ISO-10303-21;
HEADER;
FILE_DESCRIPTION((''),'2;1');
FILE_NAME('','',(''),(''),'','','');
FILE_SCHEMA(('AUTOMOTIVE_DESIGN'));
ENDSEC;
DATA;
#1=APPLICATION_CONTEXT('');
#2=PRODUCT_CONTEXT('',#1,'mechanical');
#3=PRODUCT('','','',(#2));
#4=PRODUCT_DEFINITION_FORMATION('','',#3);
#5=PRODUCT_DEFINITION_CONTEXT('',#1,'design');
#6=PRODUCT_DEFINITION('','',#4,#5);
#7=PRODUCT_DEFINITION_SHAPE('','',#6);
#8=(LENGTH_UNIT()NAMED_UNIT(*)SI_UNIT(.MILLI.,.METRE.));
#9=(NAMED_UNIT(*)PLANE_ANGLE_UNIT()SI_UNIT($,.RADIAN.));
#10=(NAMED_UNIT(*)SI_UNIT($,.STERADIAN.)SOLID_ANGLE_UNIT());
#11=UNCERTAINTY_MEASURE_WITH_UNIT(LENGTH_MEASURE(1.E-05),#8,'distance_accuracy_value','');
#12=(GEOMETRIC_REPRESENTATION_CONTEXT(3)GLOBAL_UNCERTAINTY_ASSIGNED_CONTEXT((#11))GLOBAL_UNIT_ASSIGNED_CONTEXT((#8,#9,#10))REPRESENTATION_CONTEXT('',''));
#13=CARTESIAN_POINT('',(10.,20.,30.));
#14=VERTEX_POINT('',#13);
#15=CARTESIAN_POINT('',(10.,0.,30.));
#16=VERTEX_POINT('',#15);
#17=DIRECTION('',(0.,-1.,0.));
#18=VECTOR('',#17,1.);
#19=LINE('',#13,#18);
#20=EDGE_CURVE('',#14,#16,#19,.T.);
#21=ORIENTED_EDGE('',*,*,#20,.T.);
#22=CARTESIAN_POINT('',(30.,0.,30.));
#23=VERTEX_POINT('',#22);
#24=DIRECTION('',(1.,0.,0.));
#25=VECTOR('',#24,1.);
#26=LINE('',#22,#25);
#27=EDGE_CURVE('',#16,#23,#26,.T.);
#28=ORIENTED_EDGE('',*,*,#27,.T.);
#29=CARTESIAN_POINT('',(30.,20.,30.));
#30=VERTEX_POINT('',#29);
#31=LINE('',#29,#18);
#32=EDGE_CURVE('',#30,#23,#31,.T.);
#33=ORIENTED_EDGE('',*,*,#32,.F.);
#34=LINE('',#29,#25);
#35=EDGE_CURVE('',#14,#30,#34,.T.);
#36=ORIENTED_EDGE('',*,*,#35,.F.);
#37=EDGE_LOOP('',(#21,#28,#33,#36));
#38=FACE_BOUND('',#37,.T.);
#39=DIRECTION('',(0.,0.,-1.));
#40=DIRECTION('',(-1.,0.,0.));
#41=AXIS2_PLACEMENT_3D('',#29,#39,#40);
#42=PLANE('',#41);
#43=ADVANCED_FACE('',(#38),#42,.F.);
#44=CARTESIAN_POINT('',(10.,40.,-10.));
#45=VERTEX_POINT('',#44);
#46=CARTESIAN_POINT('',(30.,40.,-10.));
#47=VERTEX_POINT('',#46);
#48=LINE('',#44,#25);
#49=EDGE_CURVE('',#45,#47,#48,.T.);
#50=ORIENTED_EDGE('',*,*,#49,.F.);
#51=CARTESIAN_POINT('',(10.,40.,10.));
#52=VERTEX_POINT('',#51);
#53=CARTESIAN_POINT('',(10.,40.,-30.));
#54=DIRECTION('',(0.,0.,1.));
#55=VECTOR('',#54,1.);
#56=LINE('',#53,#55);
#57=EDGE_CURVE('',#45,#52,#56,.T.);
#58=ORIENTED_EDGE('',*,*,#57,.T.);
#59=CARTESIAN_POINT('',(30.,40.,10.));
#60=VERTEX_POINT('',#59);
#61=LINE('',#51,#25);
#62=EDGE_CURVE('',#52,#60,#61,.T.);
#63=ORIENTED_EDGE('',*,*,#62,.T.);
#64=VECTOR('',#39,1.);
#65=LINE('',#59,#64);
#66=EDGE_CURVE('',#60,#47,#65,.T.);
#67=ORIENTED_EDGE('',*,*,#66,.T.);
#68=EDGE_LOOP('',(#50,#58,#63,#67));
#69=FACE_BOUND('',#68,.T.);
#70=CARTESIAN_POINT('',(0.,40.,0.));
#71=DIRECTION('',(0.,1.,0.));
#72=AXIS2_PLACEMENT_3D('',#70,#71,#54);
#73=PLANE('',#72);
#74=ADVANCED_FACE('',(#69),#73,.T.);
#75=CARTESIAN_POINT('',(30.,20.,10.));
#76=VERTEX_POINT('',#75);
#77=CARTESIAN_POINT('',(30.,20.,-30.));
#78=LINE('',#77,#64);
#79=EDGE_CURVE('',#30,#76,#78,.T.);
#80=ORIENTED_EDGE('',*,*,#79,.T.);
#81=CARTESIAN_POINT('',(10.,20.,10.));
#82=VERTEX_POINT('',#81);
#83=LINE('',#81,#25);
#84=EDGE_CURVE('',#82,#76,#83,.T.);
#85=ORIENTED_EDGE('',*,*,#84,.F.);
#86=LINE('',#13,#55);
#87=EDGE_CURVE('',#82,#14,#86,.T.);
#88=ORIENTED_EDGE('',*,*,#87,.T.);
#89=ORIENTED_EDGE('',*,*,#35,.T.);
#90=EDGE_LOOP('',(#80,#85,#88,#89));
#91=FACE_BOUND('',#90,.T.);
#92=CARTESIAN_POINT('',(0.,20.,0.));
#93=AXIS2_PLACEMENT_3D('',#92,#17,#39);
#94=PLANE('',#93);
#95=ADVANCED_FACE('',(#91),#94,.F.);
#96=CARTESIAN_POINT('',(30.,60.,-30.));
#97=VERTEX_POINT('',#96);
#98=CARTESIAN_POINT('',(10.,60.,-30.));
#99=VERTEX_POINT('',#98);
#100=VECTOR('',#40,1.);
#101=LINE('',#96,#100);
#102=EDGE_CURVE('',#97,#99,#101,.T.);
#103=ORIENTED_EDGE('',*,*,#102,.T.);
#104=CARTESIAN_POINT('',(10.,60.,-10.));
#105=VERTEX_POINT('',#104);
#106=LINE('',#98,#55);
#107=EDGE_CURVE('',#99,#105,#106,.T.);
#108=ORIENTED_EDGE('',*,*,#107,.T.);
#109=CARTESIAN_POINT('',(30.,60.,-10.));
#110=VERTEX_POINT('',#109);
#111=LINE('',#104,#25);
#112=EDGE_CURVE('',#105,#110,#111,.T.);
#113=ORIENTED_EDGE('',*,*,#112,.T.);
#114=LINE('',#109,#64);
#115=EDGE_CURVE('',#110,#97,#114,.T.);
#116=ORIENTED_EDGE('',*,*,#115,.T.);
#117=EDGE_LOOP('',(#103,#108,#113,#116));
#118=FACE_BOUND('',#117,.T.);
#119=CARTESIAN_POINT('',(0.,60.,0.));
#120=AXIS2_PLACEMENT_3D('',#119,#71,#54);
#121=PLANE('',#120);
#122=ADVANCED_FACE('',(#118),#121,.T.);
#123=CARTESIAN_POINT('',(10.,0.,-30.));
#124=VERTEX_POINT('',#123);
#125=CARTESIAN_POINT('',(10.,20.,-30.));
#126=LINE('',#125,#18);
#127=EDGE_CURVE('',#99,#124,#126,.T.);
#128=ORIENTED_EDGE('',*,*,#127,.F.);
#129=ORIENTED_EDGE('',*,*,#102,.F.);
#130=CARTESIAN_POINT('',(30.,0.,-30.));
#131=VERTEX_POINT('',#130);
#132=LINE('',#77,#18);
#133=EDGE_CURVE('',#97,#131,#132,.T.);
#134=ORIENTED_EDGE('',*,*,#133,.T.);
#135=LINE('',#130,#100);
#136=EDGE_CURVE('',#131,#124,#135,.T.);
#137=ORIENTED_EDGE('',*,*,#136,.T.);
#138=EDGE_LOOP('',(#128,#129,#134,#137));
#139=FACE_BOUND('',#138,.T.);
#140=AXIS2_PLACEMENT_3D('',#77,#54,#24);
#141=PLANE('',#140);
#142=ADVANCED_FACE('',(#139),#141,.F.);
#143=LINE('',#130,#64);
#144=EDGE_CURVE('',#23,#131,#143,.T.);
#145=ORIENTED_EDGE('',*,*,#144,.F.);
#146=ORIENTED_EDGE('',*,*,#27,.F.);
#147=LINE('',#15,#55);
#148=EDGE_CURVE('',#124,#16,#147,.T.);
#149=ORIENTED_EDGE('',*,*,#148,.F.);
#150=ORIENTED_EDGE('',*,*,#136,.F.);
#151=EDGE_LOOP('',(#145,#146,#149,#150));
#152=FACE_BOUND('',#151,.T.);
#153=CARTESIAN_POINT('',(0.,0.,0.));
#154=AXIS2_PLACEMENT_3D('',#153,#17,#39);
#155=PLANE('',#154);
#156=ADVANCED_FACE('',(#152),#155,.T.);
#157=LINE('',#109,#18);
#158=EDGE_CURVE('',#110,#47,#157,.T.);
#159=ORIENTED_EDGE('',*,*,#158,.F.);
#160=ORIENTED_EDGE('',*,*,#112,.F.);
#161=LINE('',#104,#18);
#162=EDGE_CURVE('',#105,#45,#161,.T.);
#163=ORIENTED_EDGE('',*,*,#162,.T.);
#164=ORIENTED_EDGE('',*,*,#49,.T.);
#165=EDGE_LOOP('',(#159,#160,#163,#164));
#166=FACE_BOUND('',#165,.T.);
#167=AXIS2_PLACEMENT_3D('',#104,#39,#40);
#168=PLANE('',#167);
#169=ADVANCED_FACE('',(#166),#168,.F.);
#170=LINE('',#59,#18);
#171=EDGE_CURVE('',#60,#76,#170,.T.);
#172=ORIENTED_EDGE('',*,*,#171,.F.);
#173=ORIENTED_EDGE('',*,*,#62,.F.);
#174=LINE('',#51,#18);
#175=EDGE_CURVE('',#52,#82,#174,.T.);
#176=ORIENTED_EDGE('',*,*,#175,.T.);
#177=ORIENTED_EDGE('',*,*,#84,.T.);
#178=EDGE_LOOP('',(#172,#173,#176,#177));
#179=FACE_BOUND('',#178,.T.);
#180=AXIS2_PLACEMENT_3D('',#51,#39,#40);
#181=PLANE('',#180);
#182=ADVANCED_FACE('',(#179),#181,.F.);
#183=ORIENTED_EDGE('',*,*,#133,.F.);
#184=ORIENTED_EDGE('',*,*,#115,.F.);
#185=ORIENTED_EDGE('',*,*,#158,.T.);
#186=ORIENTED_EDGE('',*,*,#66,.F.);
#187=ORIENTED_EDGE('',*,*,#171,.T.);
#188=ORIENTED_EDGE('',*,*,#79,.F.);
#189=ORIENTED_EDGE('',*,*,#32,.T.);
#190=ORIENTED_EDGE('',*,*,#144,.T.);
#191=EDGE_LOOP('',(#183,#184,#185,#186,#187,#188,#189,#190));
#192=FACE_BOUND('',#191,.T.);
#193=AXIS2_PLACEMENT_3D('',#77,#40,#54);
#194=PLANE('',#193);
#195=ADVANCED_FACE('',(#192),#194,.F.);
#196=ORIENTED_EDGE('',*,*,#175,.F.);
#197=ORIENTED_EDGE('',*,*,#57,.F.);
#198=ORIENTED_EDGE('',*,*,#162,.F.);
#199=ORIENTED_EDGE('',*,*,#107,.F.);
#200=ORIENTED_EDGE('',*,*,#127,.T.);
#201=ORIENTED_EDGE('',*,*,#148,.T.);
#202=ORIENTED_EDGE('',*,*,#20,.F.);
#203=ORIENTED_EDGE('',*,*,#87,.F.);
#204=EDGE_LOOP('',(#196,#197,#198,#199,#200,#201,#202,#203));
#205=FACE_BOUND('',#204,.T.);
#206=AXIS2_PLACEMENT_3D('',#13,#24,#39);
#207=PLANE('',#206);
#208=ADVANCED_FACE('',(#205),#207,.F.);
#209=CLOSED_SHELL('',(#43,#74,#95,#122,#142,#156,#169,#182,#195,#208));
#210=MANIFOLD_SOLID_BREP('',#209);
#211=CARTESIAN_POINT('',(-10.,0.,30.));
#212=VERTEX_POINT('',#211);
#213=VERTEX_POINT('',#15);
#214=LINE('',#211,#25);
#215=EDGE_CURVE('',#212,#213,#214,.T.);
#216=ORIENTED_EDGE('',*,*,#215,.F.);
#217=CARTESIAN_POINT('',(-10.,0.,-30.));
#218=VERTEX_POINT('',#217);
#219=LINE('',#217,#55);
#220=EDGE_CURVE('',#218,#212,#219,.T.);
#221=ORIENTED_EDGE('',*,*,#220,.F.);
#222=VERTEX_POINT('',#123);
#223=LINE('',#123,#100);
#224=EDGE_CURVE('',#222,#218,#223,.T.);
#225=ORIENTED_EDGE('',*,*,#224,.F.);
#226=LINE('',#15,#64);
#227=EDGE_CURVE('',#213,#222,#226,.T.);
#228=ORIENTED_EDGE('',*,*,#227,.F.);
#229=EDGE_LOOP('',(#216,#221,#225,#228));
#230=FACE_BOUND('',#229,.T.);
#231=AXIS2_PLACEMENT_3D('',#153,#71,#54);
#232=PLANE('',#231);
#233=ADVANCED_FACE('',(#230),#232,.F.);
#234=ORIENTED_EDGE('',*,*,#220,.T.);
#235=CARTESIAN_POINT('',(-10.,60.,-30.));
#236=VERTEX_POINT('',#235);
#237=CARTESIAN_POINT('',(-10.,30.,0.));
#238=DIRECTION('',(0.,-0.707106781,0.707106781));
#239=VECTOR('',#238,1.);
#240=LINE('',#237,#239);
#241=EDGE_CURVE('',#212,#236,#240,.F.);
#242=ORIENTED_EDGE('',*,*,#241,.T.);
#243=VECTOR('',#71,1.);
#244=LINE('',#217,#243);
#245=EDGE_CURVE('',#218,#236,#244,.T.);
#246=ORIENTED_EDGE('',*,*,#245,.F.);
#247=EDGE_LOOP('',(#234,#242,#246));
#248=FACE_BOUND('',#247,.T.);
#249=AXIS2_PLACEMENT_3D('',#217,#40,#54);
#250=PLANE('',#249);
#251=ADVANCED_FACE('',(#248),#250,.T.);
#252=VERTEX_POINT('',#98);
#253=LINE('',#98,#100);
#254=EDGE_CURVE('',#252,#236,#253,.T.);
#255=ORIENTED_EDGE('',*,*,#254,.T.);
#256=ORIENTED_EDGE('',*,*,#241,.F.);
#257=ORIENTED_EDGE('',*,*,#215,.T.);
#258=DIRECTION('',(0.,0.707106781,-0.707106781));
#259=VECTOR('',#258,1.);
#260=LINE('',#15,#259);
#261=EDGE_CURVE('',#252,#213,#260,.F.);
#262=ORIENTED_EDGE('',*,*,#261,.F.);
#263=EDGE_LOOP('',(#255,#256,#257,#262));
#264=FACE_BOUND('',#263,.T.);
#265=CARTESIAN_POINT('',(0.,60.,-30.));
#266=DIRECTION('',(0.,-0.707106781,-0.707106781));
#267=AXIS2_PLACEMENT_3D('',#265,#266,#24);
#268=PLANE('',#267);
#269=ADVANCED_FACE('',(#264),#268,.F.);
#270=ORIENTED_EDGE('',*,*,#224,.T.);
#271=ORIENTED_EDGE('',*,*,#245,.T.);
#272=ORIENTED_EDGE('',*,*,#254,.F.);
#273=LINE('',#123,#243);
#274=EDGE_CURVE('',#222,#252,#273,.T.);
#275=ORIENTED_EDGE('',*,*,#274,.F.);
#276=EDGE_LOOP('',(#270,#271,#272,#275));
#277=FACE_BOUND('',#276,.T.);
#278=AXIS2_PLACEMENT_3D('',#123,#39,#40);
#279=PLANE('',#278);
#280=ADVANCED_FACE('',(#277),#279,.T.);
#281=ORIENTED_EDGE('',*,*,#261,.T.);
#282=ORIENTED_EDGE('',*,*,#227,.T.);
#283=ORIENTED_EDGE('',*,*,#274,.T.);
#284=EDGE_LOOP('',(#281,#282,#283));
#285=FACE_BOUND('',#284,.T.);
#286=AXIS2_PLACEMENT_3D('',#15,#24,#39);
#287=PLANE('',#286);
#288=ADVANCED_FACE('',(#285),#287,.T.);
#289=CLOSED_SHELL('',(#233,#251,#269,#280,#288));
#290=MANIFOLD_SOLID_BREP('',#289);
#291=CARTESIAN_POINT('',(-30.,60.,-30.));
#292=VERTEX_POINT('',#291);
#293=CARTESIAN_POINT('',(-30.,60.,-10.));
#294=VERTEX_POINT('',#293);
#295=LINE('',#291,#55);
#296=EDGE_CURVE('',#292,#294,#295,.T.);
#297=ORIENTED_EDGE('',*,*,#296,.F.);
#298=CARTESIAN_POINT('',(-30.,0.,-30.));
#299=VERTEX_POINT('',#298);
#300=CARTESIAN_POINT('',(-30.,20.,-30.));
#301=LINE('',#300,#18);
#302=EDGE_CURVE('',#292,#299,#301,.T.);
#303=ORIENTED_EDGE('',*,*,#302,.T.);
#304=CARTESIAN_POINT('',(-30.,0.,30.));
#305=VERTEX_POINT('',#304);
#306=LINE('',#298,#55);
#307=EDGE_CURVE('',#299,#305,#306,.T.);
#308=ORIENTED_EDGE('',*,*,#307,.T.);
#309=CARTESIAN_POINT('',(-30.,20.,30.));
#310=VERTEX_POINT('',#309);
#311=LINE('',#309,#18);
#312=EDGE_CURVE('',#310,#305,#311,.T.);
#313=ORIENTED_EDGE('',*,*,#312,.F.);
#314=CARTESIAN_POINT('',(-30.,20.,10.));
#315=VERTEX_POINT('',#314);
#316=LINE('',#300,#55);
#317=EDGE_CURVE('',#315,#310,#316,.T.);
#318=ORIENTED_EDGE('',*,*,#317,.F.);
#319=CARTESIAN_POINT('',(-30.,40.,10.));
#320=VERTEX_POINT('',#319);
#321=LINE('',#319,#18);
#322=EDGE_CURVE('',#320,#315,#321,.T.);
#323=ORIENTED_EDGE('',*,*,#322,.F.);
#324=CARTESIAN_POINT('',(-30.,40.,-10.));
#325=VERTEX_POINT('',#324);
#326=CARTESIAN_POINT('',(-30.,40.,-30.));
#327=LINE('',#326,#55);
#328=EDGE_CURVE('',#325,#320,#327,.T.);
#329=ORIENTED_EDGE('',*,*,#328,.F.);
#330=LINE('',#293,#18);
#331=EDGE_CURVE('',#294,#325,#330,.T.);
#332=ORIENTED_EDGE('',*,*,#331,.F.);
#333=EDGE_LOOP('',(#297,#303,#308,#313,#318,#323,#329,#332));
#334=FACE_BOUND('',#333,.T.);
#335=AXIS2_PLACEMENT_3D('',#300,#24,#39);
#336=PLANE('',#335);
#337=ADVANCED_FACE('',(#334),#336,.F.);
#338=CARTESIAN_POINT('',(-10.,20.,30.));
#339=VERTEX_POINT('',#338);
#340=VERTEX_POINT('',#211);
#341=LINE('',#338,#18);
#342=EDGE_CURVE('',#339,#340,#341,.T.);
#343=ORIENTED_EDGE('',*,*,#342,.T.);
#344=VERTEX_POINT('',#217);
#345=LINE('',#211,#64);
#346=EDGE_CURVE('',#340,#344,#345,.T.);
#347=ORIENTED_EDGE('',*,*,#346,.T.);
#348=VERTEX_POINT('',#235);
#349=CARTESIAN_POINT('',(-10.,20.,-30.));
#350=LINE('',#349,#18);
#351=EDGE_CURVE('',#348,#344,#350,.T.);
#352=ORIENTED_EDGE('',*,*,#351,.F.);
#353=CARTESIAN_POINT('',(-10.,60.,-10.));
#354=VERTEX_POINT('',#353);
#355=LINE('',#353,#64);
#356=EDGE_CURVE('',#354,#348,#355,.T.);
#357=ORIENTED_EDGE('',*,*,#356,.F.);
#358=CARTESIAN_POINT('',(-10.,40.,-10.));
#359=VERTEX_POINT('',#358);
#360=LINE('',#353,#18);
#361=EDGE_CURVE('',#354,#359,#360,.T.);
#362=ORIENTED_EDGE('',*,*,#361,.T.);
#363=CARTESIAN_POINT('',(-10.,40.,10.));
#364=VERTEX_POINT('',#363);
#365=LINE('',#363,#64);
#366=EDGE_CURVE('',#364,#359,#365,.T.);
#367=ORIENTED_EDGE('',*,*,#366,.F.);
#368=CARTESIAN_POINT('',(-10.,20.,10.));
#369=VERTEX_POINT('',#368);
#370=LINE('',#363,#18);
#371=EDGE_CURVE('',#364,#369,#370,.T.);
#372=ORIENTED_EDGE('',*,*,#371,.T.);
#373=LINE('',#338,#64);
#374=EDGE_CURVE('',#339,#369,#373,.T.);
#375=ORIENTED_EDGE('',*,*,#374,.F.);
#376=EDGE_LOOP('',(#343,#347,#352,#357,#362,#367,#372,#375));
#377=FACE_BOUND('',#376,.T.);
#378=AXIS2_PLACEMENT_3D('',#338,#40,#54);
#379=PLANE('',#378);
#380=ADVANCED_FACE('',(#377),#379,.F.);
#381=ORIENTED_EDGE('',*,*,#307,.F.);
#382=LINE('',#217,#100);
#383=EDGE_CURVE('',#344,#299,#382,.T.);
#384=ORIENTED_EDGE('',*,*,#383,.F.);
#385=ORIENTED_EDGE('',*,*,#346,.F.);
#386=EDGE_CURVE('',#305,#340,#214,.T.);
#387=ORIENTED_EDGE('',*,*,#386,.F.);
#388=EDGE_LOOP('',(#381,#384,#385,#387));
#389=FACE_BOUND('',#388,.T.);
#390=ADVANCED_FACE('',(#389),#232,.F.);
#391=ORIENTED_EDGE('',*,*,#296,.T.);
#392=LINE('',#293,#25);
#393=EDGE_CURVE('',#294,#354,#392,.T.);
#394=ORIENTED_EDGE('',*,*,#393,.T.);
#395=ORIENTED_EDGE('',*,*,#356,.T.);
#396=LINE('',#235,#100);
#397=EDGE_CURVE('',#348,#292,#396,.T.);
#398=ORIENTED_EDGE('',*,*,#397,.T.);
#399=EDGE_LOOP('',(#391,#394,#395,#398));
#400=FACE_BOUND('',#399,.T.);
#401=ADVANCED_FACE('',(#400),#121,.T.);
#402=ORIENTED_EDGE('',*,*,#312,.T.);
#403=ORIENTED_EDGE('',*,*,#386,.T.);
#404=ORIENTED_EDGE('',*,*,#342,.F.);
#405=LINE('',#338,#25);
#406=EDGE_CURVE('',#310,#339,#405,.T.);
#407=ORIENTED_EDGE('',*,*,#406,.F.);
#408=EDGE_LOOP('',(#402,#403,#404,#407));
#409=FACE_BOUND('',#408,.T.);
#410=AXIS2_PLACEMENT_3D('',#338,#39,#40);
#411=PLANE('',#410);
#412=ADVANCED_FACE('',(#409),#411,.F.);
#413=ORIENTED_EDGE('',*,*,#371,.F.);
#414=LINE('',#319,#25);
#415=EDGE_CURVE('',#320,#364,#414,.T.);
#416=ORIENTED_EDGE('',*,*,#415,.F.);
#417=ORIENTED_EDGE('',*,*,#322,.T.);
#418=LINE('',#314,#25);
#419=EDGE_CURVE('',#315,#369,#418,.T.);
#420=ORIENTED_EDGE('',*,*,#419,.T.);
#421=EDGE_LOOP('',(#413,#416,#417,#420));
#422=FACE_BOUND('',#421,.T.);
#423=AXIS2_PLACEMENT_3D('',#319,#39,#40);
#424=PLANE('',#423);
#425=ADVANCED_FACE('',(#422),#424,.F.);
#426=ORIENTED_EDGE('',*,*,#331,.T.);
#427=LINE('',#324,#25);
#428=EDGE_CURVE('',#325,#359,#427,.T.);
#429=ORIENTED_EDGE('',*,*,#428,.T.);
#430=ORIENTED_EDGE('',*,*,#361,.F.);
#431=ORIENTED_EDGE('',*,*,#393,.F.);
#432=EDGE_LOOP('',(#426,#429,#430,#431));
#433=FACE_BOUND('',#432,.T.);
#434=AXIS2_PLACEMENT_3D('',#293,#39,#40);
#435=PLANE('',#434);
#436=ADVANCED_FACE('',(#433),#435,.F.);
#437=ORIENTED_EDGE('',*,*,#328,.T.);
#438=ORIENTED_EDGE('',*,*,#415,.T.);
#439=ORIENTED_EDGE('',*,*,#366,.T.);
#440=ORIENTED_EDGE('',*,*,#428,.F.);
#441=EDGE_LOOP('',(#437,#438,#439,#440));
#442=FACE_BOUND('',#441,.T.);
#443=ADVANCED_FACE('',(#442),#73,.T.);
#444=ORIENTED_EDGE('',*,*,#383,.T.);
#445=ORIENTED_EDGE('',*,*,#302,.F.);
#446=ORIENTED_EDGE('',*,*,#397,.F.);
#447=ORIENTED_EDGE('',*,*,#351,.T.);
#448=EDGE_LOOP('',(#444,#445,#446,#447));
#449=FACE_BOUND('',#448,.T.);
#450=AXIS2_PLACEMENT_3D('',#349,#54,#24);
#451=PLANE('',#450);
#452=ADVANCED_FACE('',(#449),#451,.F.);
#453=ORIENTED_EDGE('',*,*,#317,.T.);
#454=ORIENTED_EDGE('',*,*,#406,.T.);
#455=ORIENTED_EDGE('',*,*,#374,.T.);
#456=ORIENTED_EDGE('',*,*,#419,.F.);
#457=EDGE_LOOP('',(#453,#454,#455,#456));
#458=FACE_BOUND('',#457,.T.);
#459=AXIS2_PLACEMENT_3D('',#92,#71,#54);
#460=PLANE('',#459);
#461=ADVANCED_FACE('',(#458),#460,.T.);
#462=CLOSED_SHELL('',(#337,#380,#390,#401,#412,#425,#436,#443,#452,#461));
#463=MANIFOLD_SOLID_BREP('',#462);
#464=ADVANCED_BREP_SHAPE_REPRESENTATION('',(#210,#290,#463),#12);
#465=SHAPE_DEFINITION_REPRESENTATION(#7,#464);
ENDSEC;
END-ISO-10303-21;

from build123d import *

# Parameters (mm, degrees)
CROQUIS1_W                = 20
CROQUIS1_H                = 60
SALIENTE_EXTRUIR1_DEPTH   = 20
SALIENTE_EXTRUIR1_2_DEPTH = 20
CROQUIS2_W                = 20
CROQUIS2_H                = 40
SALIENTE_EXTRUIR2_DEPTH   = 20
CROQUIS3_W                = 20
CROQUIS3_H                = 20
SALIENTE_EXTRUIR3_DEPTH   = 20
CROQUIS4_W                = 20
CROQUIS4_H                = 60
SALIENTE_EXTRUIR9_DEPTH   = 60
CHAFL_N1_SIZE             = 60


with BuildPart() as part:
    # Croquis1 → Saliente-Extruir1 (new body)
    with BuildSketch(Plane(origin=(0, 0, 0), x_dir=(1, 0, 0), z_dir=(0, 1, 0))):
        with Locations((20, 0)):
            Rectangle(CROQUIS1_W, CROQUIS1_H)
    extrude(amount=SALIENTE_EXTRUIR1_DEPTH)



with BuildPart() as body_2:
    # Croquis1 → Saliente-Extruir1 2 (new body)
    with BuildSketch(Plane(origin=(0, 0, 0), x_dir=(1, 0, 0), z_dir=(0, 1, 0))):
        with Locations((-20, 0)):
            Rectangle(CROQUIS1_W, CROQUIS1_H)
    extrude(amount=SALIENTE_EXTRUIR1_2_DEPTH)


with BuildPart() as part_1:
    add(part.part)

    add(body_2.part)  # Saliente-Extruir2 merges body 2
    # Croquis2 → Saliente-Extruir2 (add)
    with BuildSketch(Plane(origin=(0, 20, 0), x_dir=(1, 0, 0), z_dir=(0, 1, 0))):
        with Locations((20, 10)):
            Rectangle(CROQUIS2_W, CROQUIS2_H)
        with Locations((-20, 10)):
            Rectangle(CROQUIS2_W, CROQUIS2_H)
    extrude(amount=SALIENTE_EXTRUIR2_DEPTH)

    # Croquis3 → Saliente-Extruir3 (add)
    with BuildSketch(Plane(origin=(0, 40, 0), x_dir=(1, 0, 0), z_dir=(0, 1, 0))):
        with Locations((20, 20)):
            Rectangle(CROQUIS3_W, CROQUIS3_H)
        with Locations((-20, 20)):
            Rectangle(CROQUIS3_W, CROQUIS3_H)
    extrude(amount=SALIENTE_EXTRUIR3_DEPTH)


with BuildPart() as body_2_2:
    # Croquis4 → Saliente-Extruir9 (new body)
    with BuildSketch(Plane(origin=(0, 60, 0), x_dir=(1, 0, 0), z_dir=(0, 1, 0))):
        Rectangle(CROQUIS4_W, CROQUIS4_H)
    extrude(amount=-SALIENTE_EXTRUIR9_DEPTH)

    # Chaflán1
    chafl_n1_edges = [body_2_2.edges().sort_by_distance(p)[0] for p in [
        (0, 60, 30),
    ]]
    chamfer(chafl_n1_edges, length=CHAFL_N1_SIZE - 0.0001)  # a hair under: the kernel refuses the full size


solid = Compound([part_1.part, body_2_2.part])
